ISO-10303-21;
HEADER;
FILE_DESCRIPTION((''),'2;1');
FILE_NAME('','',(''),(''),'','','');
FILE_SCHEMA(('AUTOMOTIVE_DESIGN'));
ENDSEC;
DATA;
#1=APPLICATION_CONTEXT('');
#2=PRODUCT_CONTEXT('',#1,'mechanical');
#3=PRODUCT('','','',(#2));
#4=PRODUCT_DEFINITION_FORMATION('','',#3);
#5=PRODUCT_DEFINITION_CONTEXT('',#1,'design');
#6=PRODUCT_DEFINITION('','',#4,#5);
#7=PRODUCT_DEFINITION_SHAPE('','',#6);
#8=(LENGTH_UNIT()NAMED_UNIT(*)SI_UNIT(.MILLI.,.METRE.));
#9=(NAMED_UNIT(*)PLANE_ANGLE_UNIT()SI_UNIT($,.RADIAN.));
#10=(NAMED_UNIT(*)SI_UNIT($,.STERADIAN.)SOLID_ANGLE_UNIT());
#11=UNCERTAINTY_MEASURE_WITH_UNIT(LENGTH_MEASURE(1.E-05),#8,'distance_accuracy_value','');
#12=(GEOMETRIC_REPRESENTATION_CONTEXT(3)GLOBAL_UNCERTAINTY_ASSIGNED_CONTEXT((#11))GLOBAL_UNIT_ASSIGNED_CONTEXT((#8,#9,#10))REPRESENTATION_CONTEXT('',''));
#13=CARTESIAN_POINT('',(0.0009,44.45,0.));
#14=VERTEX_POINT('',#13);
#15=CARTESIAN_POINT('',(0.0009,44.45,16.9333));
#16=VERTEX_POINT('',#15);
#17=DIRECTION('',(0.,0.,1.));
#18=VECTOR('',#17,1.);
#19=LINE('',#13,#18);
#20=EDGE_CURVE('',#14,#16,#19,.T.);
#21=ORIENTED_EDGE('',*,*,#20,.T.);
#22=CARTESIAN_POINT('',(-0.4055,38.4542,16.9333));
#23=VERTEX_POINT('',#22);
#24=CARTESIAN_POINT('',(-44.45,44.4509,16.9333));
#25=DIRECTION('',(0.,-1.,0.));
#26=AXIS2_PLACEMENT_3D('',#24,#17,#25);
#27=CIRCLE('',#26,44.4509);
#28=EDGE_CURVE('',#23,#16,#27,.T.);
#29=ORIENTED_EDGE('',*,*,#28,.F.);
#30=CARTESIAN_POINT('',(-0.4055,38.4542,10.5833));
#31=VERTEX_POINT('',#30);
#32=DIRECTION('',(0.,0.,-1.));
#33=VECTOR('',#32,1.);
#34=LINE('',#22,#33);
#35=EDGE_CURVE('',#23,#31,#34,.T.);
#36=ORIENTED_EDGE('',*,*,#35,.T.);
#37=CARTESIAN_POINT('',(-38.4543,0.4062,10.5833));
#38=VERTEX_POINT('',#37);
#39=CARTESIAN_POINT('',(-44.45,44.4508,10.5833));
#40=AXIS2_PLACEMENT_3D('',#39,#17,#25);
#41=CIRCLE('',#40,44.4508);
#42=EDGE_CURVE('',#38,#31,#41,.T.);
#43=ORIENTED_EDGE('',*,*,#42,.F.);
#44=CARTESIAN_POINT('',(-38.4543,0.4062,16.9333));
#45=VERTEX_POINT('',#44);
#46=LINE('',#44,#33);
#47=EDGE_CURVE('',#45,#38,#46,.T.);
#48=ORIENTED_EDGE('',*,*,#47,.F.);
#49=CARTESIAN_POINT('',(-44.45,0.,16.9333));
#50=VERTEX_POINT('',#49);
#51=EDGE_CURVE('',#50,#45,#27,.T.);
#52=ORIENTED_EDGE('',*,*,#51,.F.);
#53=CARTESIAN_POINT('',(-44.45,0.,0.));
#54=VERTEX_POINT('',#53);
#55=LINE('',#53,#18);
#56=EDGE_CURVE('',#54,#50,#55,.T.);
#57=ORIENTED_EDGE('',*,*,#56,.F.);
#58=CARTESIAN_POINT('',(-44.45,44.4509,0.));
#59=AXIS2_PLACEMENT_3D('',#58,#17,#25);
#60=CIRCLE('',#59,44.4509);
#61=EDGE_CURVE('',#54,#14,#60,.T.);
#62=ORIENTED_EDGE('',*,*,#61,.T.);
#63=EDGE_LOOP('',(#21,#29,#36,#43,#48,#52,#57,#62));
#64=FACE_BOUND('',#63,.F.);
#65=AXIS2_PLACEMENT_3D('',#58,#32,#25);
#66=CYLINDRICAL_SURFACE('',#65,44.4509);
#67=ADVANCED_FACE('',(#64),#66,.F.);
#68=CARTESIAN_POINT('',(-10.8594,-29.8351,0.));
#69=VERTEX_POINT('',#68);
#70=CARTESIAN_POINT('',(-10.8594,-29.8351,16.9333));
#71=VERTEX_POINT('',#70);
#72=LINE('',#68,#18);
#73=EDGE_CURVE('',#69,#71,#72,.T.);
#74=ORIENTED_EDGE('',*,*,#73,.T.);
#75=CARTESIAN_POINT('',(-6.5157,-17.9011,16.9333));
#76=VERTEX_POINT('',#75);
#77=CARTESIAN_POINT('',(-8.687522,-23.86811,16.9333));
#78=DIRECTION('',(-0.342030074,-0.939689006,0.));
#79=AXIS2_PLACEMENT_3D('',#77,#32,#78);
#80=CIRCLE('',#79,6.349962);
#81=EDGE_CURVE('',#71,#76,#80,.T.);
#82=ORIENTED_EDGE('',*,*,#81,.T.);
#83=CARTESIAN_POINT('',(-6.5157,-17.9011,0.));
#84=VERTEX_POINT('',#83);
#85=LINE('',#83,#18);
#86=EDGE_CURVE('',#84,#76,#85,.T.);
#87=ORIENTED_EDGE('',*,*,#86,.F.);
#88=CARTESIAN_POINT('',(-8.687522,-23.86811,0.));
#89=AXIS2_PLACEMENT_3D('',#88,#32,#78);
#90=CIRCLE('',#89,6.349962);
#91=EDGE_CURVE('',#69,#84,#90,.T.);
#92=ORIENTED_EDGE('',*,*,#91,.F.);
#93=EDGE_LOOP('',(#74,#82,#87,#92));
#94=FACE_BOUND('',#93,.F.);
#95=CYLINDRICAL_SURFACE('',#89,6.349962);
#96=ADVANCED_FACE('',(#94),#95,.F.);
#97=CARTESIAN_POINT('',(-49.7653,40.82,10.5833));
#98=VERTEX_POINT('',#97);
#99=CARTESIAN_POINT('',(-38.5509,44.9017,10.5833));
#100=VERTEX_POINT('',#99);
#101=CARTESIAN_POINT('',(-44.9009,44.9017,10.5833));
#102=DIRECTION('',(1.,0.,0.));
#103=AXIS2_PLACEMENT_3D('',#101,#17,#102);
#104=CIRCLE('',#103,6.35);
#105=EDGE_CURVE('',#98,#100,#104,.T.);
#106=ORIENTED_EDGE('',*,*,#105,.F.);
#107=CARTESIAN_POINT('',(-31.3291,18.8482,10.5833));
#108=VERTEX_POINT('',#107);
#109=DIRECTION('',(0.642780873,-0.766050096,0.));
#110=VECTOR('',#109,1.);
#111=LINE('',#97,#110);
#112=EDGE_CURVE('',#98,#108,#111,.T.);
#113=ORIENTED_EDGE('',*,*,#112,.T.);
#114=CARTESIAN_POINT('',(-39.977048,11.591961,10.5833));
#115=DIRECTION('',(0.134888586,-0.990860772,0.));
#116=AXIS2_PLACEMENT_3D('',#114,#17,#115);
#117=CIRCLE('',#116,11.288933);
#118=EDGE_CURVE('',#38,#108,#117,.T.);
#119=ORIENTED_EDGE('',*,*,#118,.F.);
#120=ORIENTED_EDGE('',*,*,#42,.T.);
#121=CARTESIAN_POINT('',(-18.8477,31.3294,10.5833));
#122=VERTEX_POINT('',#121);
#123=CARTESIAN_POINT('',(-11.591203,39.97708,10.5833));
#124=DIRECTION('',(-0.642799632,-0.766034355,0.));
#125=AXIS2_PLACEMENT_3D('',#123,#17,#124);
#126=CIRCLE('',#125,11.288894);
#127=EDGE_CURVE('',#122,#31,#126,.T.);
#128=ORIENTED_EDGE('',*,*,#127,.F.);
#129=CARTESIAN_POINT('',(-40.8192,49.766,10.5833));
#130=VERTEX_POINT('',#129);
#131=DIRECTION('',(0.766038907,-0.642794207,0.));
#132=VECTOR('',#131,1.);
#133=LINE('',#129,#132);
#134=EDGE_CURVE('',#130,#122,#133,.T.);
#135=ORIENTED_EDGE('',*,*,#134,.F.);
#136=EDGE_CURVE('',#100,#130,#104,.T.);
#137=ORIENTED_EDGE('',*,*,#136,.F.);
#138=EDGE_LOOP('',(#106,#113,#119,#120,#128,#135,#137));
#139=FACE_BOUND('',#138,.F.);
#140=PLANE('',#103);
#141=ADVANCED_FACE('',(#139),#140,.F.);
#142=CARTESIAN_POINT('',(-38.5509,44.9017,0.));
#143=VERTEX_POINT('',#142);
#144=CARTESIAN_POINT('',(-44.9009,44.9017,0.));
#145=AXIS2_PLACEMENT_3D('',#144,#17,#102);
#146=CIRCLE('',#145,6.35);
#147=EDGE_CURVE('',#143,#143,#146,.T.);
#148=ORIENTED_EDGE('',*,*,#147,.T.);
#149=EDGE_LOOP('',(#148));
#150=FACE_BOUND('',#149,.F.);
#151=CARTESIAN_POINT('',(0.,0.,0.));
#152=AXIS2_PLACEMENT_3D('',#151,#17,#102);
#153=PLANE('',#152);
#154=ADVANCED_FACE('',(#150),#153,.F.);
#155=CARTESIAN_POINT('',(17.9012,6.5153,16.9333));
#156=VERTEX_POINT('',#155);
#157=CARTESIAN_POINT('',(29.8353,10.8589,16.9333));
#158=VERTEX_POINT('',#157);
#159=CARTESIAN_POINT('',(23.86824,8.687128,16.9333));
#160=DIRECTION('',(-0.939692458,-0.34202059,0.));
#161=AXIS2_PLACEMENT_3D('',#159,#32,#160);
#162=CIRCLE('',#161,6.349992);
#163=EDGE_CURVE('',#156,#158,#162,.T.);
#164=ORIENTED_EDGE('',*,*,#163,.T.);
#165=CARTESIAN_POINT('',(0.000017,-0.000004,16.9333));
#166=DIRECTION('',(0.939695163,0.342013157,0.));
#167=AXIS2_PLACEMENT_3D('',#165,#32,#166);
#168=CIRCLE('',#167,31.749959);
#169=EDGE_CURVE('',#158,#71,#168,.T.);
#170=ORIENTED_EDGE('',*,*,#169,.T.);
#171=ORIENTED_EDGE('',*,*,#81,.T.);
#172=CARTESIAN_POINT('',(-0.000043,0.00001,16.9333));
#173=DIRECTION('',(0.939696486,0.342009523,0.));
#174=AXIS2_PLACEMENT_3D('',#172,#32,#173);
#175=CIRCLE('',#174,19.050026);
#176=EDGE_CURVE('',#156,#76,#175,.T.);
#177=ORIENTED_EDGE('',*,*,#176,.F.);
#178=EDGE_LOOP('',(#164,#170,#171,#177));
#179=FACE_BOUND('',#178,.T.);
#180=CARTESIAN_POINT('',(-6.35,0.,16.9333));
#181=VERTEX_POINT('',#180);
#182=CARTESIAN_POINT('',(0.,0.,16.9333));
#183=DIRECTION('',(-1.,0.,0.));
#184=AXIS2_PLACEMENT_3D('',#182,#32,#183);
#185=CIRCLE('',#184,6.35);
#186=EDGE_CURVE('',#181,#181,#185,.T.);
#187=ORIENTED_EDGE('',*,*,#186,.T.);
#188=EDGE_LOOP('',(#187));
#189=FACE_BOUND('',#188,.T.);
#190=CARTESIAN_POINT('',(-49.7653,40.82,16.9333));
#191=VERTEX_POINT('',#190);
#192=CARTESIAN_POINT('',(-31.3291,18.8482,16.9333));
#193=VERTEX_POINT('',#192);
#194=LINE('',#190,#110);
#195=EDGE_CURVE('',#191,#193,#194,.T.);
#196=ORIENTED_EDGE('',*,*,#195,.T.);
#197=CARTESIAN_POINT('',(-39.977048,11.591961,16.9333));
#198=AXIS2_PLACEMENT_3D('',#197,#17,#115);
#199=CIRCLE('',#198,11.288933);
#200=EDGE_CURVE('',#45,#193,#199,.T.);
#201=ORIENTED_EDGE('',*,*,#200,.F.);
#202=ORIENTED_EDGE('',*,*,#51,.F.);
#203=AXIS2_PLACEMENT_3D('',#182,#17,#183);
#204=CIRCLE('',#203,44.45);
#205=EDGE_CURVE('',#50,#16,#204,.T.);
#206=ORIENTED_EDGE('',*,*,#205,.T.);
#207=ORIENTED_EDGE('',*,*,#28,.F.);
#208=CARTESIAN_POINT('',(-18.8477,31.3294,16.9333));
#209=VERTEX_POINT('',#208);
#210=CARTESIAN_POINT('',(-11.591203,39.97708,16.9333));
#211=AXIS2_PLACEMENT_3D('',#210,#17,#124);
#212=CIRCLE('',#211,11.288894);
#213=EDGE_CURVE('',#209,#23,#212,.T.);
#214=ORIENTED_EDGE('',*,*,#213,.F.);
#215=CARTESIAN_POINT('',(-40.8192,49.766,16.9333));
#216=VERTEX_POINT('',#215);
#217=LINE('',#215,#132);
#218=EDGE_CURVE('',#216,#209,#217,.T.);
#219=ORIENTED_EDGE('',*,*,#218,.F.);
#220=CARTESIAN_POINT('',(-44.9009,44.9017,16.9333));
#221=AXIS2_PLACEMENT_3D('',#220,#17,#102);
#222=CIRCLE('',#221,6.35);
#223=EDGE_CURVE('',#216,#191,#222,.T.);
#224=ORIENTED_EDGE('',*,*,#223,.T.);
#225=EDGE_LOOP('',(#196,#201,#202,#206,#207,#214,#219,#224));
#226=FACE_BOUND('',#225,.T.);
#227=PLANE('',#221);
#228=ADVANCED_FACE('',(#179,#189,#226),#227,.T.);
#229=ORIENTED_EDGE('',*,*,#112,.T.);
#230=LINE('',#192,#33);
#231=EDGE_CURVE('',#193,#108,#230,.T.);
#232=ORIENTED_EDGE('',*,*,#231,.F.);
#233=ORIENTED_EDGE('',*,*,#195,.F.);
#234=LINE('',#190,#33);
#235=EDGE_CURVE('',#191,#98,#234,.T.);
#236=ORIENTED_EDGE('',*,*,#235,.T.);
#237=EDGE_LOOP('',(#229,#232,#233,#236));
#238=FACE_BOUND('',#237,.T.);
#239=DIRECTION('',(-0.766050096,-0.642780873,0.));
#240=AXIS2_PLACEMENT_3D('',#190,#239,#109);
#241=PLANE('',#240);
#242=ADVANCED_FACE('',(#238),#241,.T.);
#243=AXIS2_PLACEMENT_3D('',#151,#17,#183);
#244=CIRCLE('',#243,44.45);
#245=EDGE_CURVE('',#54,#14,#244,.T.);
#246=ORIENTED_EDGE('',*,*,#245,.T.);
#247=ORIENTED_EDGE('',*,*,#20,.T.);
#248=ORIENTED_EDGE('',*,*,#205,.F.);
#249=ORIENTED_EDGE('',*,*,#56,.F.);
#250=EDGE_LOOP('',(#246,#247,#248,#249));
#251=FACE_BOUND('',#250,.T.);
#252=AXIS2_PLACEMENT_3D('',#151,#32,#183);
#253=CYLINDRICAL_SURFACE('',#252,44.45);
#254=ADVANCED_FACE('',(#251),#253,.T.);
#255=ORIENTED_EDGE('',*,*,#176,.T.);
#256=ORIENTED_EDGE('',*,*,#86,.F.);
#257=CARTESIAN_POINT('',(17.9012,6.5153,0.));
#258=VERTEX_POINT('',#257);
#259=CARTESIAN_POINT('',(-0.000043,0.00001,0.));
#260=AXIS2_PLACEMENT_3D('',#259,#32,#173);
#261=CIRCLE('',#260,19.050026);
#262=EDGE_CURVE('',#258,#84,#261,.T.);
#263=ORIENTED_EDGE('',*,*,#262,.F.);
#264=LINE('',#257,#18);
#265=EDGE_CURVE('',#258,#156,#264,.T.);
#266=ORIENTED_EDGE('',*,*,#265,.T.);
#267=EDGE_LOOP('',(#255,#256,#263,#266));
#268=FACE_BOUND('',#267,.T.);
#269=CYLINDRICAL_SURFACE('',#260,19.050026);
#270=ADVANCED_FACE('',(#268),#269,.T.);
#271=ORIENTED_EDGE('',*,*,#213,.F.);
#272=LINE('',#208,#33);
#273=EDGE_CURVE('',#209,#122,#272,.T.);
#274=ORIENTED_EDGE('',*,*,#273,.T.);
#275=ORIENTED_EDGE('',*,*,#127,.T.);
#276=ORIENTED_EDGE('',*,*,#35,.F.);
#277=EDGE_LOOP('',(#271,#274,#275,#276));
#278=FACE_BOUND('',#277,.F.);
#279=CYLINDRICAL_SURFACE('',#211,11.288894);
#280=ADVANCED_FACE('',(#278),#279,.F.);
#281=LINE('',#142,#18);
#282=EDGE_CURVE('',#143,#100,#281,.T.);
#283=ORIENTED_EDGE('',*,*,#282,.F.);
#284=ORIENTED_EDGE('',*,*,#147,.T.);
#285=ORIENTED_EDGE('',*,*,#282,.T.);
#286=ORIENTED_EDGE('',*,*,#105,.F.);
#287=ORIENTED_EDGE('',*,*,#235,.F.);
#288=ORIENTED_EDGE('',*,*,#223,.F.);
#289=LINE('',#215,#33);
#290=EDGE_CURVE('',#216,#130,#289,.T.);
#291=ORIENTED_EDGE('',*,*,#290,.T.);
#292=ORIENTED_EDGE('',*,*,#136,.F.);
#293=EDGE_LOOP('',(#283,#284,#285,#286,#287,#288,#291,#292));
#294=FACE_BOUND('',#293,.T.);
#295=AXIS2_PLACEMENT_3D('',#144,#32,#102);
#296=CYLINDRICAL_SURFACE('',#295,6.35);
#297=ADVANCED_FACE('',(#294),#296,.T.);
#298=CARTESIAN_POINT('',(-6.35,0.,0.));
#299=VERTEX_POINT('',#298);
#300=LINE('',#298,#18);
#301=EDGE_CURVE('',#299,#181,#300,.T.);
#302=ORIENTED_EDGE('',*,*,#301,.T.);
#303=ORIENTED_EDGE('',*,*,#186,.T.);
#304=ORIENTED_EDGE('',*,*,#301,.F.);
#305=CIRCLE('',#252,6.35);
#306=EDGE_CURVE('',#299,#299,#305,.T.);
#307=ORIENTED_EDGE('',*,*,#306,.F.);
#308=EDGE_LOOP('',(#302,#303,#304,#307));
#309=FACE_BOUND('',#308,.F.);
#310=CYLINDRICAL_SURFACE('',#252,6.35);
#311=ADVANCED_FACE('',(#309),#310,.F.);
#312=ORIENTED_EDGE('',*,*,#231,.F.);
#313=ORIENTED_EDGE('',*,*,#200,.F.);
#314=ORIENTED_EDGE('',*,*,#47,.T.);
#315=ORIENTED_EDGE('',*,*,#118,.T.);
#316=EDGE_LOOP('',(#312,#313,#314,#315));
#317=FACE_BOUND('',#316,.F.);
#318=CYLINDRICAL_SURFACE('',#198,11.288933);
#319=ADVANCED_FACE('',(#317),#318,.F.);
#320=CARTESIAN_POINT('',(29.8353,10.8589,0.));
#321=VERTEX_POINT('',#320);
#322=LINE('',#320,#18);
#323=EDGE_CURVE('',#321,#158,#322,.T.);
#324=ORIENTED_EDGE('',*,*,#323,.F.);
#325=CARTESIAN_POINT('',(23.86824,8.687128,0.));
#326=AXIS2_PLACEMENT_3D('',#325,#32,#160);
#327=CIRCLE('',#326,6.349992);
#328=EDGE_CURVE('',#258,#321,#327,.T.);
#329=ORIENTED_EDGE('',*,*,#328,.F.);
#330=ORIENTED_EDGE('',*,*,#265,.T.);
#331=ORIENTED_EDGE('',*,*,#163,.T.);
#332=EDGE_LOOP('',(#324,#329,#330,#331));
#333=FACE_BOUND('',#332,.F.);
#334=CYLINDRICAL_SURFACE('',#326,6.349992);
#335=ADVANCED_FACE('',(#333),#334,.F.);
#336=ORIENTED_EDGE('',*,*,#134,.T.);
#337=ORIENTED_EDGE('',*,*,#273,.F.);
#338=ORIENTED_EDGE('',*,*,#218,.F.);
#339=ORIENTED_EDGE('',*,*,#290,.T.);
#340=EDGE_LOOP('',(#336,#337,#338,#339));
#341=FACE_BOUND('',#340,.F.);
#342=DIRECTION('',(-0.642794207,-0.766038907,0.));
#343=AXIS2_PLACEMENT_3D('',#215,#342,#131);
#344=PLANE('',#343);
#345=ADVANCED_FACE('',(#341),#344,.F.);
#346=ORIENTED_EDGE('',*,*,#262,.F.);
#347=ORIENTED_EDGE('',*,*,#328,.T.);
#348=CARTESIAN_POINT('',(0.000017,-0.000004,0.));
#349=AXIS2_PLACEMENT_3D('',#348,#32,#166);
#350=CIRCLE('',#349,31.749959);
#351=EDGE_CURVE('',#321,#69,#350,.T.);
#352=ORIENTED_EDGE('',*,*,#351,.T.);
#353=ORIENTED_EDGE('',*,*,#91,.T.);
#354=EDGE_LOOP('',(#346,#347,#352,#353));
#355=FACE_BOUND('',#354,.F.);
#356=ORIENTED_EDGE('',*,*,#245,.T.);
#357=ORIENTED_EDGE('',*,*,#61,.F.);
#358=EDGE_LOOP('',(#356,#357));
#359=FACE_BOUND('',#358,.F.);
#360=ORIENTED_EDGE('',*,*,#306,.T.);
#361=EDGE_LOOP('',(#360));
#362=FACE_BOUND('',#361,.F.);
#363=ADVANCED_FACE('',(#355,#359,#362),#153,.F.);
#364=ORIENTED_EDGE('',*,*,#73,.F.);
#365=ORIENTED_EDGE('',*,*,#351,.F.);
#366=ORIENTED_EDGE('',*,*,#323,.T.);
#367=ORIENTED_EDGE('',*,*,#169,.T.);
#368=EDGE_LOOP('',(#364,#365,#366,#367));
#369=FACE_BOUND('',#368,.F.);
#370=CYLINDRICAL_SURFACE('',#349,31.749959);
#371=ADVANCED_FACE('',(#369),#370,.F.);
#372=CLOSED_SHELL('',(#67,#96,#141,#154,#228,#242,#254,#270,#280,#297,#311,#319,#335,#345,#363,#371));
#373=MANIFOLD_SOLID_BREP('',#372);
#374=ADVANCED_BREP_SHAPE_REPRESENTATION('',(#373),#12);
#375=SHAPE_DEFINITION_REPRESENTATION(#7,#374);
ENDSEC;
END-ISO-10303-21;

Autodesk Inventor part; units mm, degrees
ref_plane "YZ Plane" through (0, 0, 0) normal (1, 0, 0) x (0, 1, 0)
ref_plane "XZ Plane" through (0, 0, 0) normal (0, 1, 0) x (-1, 0, 0)
ref_plane "XY Plane" through (0, 0, 0) normal (0, 0, 1) x (1, 0, 0)
sketch "Sketch1" plane through (0, 0, 0) normal (0, 0, 1) x (1, 0, 0)
  line L0 (0, 0) -> (-89.8017, 0) construction
  line L1 (-89.8017, 0) -> (-44.9009, 44.9017) construction
  line L2 (-44.9009, 44.9017) -> (0, 0) construction
  arc A0 (-44.45, 0) -> (0.0009, 44.45) centre (0, 0) ccw
  line L3 (-44.45, 0) -> (-44.45, 44.4509) construction
  line L4 (-44.45, 44.4509) -> (-44.9009, 44.9017) construction
  circle A1 centre (-44.9009, 44.9017) radius 6.35
  arc A2 (-44.45, 0) -> (0.0009, 44.45) centre (-44.45, 44.4509) ccw
  point P0 (-6.7351, 6.7353)
  dimension "d8" = 89.8017
  dimension "d9" = 63.5
  dimension "d10" = 63.5
  dimension "d11" = 44.45
  dimension "d12" = 12.7
extrude "Extrusion1" add sketch "Sketch1" along normal blind 16.9333
sketch "Sketch21" plane through (-44.9009, 44.9017, 16.9333) normal (0, 0, 1) x (1, 0, 0)
  circle A0 centre (0, 0) radius 6.35 projected
  line L0 (4.0817, 4.8643) -> (26.0532, -13.5723)
  arc A1 (0.4509, -44.9017) -> (44.9017, -0.4517) centre (0.4509, -0.4509) ccw projected
  line L1 (-4.8644, -4.0817) -> (13.5718, -26.0535)
  circle A2 centre (0, 0) radius 6.35 projected
  line L2 (31.882, -31.8827) -> (26.0532, -13.5723) construction
  line L3 (31.882, -31.8827) -> (13.5718, -26.0535) construction
  arc A3 (6.4466, -44.4955) -> (13.5718, -26.0535) centre (4.9239, -33.3098) ccw
  arc A4 (26.0532, -13.5723) -> (44.4954, -6.4475) centre (33.3097, -4.9246) ccw
  line L4 (0, 0) -> (31.882, -31.8827) construction
  line L5 (13.5718, -26.0535) -> (15.941, -15.9413) construction
  line L6 (15.941, -15.9413) -> (26.0532, -13.5723) construction
  point P0 (44.9009, -44.9017)
  dimension "d85" = 10
  dimension "d86" = 11.2889
extrude "Extrusion18" add sketch "Sketch21" against normal blind 6.35 contours A0 L0 A4 A1 A3 L1
sketch "Sketch22" plane through (0, 0, 0) normal (0, 0, -1) x (-1, 0, 0)
  arc A0 (-17.9012, 6.5153) -> (6.5157, -17.9011) centre (0, 0) ccw
  arc A1 (-29.8353, 10.8589) -> (10.8594, -29.8351) centre (0, 0) ccw
  line L0 (10.8594, -29.8351) -> (6.5157, -17.9011)
  line L1 (-29.8353, 10.8589) -> (-17.9012, 6.5153)
  circle A2 centre (44.9009, 44.9017) radius 6.35 construction
  line L2 (6.5157, -17.9011) -> (44.9009, 44.9017) construction
  line L3 (44.9009, 44.9017) -> (-17.9012, 6.5153) construction
  arc A3 (-17.9012, 6.5153) -> (-29.8353, 10.8589) centre (-23.8683, 8.6871) ccw
  arc A4 (10.8594, -29.8351) -> (6.5157, -17.9011) centre (8.6875, -23.8681) ccw
  dimension "d89" = 19.05
  dimension "d90" = 12.7
  dimension "d91" = 130
extrude "Extrusion19" cut sketch "Sketch22" against normal through all
sketch "Sketch23" plane through (0, 0, 0) normal (0, 0, -1) x (-1, 0, 0)
  circle A0 centre (0, 0) radius 6.35
  dimension "d94" = 12.7
extrude "Extrusion20" cut sketch "Sketch23" against normal through all
properties part number "Geneva Drive" material "ABS Plastic"
